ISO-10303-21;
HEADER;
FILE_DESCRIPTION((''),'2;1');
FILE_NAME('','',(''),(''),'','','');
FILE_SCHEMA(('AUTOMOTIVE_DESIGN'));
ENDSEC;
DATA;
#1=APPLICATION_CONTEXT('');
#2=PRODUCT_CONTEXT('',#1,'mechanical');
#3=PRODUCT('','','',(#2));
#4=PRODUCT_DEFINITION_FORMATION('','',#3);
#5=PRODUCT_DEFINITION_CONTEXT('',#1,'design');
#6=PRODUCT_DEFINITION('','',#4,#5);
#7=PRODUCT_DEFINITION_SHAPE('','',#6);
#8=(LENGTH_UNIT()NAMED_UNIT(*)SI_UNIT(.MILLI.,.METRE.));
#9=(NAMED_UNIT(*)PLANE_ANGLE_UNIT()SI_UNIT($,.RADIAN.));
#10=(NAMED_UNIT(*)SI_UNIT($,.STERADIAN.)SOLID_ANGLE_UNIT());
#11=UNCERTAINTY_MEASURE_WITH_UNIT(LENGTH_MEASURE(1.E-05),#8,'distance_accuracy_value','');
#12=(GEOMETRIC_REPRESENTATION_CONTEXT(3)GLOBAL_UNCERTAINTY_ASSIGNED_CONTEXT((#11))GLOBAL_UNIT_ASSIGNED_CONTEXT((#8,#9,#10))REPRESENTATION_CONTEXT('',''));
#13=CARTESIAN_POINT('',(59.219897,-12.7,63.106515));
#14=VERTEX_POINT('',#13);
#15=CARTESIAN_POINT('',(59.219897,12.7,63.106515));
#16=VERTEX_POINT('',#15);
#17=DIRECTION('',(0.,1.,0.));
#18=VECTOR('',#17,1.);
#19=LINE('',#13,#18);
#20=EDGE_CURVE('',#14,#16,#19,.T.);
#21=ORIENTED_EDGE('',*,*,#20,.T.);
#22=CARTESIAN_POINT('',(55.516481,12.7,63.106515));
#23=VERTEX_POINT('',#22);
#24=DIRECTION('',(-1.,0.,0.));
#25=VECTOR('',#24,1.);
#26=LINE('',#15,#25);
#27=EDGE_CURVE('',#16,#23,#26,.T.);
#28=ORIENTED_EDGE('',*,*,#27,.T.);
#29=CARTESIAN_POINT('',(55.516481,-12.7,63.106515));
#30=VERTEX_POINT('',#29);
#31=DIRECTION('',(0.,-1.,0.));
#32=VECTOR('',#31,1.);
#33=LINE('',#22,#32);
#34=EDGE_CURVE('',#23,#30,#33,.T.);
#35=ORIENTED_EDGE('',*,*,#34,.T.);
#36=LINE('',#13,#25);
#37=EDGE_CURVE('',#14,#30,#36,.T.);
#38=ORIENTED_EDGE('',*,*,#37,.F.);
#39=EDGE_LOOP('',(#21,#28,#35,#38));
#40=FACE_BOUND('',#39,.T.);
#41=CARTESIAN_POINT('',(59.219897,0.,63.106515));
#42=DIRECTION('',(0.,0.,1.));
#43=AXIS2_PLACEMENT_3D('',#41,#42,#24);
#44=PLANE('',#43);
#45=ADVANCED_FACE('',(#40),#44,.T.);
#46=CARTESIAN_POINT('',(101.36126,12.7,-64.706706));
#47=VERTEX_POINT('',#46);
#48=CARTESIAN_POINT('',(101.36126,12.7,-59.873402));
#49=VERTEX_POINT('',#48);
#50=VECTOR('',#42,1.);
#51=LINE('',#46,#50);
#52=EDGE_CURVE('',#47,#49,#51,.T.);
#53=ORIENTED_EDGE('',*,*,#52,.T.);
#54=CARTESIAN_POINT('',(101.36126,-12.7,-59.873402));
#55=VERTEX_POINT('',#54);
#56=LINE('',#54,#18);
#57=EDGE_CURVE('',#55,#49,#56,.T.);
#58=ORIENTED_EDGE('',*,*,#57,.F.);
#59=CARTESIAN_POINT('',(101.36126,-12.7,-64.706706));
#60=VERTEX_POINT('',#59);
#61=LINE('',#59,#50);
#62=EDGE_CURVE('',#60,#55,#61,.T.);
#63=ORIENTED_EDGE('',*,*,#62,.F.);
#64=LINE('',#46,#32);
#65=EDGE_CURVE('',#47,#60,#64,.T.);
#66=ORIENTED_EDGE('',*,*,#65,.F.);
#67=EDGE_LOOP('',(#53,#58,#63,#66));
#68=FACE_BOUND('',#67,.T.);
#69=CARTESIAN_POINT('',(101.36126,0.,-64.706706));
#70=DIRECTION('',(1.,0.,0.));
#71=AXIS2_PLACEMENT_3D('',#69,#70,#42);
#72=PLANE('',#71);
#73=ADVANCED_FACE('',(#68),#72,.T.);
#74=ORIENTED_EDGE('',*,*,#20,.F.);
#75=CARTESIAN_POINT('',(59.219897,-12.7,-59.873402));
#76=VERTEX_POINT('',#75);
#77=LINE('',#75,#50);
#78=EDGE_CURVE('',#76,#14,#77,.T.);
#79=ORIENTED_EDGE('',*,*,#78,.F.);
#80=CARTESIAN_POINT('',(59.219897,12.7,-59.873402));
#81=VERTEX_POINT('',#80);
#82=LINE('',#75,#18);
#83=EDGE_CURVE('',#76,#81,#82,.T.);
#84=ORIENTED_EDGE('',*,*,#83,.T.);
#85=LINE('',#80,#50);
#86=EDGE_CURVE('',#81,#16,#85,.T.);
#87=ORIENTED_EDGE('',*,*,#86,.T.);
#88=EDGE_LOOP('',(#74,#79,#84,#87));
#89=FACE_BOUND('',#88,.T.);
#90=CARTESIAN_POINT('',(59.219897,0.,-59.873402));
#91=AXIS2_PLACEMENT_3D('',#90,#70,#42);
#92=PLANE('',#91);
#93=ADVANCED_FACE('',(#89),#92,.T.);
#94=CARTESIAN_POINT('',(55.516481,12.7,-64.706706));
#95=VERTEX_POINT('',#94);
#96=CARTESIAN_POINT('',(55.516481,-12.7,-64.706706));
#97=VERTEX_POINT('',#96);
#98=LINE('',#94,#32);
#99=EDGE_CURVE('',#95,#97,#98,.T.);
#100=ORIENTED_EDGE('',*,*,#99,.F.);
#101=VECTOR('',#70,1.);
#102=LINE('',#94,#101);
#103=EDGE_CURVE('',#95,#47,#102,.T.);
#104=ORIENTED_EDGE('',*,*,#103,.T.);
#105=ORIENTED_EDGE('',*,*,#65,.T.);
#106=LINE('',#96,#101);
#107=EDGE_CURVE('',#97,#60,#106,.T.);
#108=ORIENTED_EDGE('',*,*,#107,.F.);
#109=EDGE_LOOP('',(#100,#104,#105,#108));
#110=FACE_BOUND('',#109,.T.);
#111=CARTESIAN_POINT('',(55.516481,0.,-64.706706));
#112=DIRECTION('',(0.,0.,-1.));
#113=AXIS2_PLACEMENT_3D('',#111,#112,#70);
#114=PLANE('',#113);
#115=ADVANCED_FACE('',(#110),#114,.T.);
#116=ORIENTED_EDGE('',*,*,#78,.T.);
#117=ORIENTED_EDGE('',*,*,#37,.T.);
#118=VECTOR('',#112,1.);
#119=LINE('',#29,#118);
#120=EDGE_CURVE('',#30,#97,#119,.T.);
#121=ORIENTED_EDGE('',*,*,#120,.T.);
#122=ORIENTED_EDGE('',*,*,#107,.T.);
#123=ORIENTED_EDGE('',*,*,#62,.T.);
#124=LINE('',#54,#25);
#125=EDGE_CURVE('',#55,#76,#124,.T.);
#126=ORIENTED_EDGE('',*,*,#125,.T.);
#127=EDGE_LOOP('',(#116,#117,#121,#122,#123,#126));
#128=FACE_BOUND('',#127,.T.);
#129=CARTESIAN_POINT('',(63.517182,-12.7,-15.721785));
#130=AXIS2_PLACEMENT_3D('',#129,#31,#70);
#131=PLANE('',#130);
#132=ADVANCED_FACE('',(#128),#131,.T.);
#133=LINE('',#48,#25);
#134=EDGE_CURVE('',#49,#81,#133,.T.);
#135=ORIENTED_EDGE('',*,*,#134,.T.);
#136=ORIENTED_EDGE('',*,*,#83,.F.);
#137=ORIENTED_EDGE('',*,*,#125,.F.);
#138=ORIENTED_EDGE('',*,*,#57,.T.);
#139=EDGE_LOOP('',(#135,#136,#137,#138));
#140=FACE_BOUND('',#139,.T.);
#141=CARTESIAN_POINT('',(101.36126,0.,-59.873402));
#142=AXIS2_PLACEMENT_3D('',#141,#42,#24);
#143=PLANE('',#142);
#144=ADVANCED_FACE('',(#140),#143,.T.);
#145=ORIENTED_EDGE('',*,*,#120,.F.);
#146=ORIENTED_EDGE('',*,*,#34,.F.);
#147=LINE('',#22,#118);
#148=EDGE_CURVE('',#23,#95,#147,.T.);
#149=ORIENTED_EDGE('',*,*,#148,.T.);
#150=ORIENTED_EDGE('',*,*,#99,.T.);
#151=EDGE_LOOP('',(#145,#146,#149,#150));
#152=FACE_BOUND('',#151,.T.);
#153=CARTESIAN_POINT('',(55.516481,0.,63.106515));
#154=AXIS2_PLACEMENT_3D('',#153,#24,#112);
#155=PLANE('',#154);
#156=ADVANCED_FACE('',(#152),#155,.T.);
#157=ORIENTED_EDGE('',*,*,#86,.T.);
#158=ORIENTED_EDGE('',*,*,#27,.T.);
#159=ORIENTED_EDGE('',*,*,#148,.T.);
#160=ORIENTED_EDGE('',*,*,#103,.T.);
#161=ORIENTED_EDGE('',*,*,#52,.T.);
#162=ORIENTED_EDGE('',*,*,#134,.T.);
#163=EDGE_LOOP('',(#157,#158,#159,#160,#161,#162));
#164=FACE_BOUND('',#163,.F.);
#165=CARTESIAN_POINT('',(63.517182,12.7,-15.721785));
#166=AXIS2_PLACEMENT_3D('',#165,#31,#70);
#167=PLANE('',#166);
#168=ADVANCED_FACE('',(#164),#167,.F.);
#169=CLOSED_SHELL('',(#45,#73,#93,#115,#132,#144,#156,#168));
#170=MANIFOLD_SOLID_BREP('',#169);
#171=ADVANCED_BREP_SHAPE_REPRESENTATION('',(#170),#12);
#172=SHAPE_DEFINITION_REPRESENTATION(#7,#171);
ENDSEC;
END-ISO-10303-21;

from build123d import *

# Parameters (mm, degrees)
F3_DEPTH = 12.7


# Not quite as in the source:
# - the program builds the solid bodies; features that only make, move or delete a surface that nothing else refers to are left out


with BuildPart() as f3:
    # F2 (on Front) → F3 (new body, symmetric)
    with BuildSketch(Plane.XZ):
        Polygon((59.2198967934, 63.1065145135), (55.5164813995, 63.1065145135), (55.5164813995, -59.8734021187), (55.5164813995, -64.7067055106), (101.3612598181, -64.7067055106), (101.3612598181, -59.8734021187), (59.2198967934, -59.8734021187), align=None)
    extrude(amount=F3_DEPTH, both=True)


solid = f3.part
